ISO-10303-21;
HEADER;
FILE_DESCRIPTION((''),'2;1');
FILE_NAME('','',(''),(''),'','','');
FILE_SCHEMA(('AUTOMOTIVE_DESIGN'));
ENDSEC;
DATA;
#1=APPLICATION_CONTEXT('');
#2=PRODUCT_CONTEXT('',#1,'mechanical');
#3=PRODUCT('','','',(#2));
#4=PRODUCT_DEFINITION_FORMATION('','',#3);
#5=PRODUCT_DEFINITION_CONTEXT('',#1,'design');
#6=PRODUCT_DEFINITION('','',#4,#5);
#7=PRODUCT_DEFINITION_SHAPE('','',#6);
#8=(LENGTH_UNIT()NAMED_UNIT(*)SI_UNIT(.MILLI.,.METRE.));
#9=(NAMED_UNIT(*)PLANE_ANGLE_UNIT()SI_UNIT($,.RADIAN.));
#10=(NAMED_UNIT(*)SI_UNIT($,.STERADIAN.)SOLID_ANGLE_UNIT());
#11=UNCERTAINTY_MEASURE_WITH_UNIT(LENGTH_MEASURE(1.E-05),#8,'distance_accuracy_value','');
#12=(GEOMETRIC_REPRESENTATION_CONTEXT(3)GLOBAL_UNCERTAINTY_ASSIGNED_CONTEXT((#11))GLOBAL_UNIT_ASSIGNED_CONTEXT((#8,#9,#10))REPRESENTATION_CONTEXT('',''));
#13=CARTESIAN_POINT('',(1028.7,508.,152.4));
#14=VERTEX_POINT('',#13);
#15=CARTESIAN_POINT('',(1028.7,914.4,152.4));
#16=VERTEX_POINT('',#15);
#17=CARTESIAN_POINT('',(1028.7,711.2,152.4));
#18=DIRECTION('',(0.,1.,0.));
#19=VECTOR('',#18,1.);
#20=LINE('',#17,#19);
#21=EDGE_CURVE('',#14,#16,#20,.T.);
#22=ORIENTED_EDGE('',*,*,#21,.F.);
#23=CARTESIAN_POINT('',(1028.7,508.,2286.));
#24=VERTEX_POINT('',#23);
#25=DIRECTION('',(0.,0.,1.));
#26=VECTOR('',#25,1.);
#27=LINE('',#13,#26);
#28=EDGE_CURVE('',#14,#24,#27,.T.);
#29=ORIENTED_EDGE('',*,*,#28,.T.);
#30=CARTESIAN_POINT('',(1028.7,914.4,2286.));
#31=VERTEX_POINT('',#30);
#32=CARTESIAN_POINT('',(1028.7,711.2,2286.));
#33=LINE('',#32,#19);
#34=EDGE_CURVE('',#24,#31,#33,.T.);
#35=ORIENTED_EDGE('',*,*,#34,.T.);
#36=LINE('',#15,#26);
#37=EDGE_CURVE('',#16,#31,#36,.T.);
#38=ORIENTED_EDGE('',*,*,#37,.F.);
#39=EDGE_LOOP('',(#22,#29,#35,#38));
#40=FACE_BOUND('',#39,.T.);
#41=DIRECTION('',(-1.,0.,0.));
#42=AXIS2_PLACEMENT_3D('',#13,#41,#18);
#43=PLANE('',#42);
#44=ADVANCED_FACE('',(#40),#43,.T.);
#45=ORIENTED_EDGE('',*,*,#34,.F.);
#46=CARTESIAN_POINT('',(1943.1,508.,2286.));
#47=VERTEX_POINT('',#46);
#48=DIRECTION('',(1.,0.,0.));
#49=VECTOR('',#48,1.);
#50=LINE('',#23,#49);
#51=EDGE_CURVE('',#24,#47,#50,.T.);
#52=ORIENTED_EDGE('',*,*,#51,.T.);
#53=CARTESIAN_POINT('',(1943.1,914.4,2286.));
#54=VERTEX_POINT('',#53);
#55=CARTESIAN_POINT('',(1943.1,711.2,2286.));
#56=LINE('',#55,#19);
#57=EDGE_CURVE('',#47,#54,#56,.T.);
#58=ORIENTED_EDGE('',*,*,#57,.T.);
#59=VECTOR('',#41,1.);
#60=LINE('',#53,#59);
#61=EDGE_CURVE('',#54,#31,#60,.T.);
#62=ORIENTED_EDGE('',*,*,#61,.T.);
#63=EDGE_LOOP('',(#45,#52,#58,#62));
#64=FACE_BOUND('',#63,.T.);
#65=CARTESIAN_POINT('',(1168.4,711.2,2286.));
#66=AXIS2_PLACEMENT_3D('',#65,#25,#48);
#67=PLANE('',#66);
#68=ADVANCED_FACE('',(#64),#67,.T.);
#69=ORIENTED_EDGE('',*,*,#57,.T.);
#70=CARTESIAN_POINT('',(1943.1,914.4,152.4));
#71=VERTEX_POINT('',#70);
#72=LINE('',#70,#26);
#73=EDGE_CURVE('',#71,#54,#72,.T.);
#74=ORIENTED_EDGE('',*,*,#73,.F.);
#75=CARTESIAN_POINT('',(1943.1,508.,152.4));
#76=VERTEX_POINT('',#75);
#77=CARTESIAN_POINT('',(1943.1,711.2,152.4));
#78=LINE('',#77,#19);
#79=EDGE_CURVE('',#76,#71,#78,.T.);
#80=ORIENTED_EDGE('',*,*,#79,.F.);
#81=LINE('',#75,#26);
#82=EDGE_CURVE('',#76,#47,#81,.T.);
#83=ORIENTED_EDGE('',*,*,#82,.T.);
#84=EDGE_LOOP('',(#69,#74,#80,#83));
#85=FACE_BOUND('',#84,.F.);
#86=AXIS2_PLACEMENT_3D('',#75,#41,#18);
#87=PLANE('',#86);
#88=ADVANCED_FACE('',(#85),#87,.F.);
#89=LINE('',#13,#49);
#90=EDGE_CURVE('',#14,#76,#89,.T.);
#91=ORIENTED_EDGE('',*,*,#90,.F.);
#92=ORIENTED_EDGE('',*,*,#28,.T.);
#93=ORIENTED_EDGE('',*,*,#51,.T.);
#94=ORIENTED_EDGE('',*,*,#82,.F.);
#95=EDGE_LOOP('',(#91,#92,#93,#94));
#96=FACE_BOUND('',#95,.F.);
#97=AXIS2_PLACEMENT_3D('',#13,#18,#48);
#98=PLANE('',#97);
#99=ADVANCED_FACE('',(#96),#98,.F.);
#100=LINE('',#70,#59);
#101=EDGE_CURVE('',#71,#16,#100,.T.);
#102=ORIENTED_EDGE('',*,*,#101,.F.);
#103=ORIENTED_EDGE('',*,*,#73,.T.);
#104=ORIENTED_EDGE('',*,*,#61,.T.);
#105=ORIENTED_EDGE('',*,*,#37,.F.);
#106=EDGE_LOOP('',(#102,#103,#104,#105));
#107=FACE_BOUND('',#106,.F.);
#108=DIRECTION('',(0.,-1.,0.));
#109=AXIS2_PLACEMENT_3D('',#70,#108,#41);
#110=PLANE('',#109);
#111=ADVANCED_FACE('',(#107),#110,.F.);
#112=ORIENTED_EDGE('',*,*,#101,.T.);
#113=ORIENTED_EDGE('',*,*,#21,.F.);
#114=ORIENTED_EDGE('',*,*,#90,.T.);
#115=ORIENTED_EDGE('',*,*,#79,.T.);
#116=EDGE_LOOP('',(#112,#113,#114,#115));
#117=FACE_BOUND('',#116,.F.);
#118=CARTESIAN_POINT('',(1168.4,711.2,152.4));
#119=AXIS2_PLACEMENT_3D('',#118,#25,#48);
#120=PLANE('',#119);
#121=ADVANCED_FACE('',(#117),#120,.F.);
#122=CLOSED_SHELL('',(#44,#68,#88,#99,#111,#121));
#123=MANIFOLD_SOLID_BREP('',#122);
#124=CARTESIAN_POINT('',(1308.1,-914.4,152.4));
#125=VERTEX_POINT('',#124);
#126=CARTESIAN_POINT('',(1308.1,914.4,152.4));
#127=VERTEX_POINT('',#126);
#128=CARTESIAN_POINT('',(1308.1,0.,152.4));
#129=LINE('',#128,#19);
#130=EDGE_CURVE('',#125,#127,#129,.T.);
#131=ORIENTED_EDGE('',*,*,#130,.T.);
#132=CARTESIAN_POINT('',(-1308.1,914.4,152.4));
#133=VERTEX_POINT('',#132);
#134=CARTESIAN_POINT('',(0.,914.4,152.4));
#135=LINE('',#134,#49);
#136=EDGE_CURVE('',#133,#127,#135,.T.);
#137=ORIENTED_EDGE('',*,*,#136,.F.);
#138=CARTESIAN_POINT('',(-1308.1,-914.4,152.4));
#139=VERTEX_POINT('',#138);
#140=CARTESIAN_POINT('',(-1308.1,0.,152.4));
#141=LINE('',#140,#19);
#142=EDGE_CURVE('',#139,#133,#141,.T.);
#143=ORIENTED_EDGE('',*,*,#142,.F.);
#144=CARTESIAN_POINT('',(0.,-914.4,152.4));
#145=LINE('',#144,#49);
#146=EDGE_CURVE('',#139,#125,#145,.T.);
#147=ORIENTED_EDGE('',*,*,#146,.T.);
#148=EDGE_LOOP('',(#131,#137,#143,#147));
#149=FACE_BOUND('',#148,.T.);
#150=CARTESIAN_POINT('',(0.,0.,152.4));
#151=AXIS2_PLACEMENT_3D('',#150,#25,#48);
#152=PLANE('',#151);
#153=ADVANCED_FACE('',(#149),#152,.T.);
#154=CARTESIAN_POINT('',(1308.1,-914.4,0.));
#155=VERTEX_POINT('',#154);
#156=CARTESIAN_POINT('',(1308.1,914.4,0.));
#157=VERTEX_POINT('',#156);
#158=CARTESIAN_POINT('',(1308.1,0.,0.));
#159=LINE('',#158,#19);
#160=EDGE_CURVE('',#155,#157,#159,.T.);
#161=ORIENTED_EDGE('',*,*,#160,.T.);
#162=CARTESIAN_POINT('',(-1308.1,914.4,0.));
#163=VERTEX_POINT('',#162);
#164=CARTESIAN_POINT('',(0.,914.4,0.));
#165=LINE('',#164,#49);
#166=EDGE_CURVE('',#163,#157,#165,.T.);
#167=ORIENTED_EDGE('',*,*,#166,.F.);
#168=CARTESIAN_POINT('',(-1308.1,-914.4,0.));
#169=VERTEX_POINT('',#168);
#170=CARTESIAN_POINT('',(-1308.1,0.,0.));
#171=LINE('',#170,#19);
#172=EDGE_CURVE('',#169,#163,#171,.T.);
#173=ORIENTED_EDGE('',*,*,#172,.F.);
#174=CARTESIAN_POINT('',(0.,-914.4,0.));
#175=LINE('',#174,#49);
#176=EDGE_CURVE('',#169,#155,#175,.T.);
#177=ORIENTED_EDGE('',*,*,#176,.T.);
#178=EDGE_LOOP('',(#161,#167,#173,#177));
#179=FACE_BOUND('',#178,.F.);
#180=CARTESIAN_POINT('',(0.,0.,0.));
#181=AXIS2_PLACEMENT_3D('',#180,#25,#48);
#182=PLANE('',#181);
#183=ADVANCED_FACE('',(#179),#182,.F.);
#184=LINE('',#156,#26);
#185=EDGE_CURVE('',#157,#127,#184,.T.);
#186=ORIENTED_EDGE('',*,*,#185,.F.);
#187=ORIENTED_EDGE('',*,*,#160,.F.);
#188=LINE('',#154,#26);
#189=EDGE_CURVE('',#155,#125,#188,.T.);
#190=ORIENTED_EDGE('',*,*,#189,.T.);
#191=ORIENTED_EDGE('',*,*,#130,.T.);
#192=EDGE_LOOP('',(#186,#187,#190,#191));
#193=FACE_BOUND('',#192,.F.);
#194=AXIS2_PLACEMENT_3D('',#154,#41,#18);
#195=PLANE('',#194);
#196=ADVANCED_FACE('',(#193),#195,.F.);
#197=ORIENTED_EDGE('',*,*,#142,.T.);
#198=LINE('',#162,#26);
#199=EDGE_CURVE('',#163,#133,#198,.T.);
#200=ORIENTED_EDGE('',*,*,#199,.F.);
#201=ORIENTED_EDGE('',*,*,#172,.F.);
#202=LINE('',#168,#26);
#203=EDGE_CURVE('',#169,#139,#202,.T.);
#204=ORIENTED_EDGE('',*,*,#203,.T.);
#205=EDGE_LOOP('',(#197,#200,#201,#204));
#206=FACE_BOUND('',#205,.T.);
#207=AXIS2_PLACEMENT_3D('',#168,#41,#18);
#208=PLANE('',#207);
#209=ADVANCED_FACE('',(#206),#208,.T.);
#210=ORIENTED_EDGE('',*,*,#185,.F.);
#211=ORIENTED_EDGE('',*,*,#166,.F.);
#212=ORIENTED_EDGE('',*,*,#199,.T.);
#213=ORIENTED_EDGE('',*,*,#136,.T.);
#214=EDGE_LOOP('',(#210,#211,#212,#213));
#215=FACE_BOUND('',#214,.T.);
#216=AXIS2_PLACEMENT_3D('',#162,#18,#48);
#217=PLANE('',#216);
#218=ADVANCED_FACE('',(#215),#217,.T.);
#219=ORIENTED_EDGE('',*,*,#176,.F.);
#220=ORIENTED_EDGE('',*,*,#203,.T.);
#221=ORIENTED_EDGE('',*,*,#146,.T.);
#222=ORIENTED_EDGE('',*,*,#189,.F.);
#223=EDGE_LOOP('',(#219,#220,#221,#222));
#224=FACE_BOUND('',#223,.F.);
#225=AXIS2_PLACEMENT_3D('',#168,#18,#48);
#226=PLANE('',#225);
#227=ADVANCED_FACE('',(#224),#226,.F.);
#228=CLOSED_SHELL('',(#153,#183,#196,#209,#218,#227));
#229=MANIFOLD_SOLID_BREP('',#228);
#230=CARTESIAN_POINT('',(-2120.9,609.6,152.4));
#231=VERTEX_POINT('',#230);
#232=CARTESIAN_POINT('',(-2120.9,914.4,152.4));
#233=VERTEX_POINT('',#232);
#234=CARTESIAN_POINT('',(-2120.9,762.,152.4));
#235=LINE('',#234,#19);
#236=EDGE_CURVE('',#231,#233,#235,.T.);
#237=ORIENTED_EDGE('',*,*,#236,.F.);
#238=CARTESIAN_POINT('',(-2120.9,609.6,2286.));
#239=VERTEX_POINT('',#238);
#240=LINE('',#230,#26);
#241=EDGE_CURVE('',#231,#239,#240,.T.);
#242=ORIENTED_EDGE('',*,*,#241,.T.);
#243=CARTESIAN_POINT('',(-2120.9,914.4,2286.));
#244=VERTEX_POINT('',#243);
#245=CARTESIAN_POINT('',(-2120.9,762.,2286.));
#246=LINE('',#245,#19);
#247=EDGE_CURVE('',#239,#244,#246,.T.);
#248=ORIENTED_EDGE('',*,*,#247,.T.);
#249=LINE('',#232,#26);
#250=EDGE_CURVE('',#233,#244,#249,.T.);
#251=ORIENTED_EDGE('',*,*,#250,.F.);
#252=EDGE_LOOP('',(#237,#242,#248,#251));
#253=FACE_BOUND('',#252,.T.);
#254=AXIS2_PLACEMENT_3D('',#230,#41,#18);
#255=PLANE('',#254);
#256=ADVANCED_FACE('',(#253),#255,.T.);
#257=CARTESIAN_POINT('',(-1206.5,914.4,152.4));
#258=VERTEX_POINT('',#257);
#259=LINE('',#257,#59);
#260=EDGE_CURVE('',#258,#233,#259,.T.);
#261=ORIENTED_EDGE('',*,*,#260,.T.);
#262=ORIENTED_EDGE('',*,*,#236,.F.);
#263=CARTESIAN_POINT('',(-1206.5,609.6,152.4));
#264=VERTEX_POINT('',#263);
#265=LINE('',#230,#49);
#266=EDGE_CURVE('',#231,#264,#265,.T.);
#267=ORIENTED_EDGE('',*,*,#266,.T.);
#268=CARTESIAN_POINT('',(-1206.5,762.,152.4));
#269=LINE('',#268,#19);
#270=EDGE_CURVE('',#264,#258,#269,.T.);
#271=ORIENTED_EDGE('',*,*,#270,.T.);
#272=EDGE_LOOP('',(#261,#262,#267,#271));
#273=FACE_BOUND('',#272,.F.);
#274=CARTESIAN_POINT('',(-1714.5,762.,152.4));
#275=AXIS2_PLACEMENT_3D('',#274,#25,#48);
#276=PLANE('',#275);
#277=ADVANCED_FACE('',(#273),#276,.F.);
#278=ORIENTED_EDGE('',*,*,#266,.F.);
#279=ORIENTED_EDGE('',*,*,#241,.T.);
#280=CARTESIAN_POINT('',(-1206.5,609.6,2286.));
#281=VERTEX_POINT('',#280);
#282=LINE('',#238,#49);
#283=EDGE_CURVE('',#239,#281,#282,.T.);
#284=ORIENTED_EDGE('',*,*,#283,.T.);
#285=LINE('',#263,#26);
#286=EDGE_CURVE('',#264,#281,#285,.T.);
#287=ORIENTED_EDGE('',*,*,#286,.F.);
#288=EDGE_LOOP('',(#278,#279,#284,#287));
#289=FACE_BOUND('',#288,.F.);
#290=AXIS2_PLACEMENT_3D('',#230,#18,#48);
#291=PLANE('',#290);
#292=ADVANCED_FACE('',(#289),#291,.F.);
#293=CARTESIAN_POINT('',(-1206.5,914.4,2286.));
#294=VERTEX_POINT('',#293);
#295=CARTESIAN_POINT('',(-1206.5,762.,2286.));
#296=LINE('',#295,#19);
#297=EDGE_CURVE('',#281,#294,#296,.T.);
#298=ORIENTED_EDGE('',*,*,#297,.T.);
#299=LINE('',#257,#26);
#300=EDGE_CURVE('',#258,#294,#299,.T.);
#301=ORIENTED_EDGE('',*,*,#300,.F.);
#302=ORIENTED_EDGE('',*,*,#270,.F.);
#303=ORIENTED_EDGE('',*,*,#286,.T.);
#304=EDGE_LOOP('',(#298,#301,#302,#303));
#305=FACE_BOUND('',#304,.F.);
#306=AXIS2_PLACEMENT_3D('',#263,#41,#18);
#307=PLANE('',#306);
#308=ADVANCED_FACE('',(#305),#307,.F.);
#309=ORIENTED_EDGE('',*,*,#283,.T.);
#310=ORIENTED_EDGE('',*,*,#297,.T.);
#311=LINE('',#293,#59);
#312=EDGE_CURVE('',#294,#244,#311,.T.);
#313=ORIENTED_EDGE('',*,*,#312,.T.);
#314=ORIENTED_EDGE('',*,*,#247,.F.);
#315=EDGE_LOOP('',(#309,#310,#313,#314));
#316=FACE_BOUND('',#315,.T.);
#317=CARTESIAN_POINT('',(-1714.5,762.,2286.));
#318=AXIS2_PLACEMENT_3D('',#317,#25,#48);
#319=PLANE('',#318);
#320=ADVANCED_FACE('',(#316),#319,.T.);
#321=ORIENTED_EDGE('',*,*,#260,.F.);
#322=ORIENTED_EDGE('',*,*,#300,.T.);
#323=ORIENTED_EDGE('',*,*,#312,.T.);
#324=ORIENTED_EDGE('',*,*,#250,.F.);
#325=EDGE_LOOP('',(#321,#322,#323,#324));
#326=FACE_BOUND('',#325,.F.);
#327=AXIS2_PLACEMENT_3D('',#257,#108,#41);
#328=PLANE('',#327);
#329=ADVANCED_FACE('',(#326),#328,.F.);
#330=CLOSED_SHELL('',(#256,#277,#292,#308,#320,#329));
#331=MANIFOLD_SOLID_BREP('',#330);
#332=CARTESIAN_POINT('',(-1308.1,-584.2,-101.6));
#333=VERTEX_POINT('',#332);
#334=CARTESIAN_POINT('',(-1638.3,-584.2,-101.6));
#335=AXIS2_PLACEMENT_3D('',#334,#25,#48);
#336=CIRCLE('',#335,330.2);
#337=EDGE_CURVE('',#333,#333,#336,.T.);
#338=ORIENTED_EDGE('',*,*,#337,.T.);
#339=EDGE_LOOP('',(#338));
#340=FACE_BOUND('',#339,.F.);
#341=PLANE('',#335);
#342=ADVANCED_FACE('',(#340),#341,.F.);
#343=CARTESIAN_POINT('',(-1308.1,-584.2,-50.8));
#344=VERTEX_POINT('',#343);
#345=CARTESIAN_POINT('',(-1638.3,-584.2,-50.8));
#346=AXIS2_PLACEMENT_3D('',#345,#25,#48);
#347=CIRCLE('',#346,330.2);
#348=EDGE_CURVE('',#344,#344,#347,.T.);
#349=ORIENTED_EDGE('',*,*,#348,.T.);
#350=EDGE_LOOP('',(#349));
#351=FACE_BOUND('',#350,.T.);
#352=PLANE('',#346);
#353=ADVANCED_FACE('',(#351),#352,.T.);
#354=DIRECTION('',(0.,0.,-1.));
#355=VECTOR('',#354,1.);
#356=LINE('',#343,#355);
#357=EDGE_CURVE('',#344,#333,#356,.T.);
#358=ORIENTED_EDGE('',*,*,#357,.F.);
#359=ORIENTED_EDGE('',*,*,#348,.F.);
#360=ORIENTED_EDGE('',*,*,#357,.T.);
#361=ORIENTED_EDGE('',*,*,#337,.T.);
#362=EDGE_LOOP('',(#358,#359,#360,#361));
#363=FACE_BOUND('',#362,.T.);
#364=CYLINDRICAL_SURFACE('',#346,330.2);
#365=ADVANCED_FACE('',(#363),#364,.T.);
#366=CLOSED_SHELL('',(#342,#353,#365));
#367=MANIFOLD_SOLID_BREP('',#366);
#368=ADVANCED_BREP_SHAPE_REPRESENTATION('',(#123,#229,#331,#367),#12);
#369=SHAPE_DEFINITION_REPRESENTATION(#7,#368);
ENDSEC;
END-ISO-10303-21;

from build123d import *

# Parameters (mm, degrees)
F1_W     = 2616.2
F1_H     = 1828.8
F2_DEPTH = 152.4
F3_W     = 812.8
F3_H     = 304.8
F3_W_2   = 101.6
F4_DEPTH = 2133.6
F3_W_3   = 279.4
F3_H_2   = 406.4
F3_W_4   = 635
F6_R     = 330.2
F7_DEPTH = 50.8


# Not quite as in the source:
# - a variable given as a bare number and used for a length is read in inches; the dataset says mm whatever the document's units were


with BuildPart() as f2:
    # F1 (on Top) → F2 (new body)
    with BuildSketch(Plane.XY):
        Rectangle(F1_W, F1_H)
    extrude(amount=F2_DEPTH)


with BuildPart() as f4:
    # F3 (on face) → F4 (new body)
    with BuildSketch(Plane.XY.offset(152.4)):
        with Locations((-1714.5, 762)):
            Rectangle(F3_W, F3_H)
        with Locations((-1257.3, 762)):
            Rectangle(F3_W_2, F3_H)
    extrude(amount=F4_DEPTH)


with BuildPart() as f4b:
    # F3 (on face) → F4, piece 2 (new body)
    with BuildSketch(Plane.XY.offset(152.4)):
        with Locations((1168.4, 711.2)):
            Rectangle(F3_W_3, F3_H_2)
        with Locations((1625.6, 711.2)):
            Rectangle(F3_W_4, F3_H_2)
    extrude(amount=F4_DEPTH)


with BuildPart() as f7:
    # F6 (on offset) → F7 (new body)
    with BuildSketch(Plane.XY.offset(-50.8)):
        with Locations((-1638.3, -584.2)):
            Circle(F6_R)
    extrude(amount=-F7_DEPTH)


solid = Compound([f2.part, f4.part, f4b.part, f7.part])
